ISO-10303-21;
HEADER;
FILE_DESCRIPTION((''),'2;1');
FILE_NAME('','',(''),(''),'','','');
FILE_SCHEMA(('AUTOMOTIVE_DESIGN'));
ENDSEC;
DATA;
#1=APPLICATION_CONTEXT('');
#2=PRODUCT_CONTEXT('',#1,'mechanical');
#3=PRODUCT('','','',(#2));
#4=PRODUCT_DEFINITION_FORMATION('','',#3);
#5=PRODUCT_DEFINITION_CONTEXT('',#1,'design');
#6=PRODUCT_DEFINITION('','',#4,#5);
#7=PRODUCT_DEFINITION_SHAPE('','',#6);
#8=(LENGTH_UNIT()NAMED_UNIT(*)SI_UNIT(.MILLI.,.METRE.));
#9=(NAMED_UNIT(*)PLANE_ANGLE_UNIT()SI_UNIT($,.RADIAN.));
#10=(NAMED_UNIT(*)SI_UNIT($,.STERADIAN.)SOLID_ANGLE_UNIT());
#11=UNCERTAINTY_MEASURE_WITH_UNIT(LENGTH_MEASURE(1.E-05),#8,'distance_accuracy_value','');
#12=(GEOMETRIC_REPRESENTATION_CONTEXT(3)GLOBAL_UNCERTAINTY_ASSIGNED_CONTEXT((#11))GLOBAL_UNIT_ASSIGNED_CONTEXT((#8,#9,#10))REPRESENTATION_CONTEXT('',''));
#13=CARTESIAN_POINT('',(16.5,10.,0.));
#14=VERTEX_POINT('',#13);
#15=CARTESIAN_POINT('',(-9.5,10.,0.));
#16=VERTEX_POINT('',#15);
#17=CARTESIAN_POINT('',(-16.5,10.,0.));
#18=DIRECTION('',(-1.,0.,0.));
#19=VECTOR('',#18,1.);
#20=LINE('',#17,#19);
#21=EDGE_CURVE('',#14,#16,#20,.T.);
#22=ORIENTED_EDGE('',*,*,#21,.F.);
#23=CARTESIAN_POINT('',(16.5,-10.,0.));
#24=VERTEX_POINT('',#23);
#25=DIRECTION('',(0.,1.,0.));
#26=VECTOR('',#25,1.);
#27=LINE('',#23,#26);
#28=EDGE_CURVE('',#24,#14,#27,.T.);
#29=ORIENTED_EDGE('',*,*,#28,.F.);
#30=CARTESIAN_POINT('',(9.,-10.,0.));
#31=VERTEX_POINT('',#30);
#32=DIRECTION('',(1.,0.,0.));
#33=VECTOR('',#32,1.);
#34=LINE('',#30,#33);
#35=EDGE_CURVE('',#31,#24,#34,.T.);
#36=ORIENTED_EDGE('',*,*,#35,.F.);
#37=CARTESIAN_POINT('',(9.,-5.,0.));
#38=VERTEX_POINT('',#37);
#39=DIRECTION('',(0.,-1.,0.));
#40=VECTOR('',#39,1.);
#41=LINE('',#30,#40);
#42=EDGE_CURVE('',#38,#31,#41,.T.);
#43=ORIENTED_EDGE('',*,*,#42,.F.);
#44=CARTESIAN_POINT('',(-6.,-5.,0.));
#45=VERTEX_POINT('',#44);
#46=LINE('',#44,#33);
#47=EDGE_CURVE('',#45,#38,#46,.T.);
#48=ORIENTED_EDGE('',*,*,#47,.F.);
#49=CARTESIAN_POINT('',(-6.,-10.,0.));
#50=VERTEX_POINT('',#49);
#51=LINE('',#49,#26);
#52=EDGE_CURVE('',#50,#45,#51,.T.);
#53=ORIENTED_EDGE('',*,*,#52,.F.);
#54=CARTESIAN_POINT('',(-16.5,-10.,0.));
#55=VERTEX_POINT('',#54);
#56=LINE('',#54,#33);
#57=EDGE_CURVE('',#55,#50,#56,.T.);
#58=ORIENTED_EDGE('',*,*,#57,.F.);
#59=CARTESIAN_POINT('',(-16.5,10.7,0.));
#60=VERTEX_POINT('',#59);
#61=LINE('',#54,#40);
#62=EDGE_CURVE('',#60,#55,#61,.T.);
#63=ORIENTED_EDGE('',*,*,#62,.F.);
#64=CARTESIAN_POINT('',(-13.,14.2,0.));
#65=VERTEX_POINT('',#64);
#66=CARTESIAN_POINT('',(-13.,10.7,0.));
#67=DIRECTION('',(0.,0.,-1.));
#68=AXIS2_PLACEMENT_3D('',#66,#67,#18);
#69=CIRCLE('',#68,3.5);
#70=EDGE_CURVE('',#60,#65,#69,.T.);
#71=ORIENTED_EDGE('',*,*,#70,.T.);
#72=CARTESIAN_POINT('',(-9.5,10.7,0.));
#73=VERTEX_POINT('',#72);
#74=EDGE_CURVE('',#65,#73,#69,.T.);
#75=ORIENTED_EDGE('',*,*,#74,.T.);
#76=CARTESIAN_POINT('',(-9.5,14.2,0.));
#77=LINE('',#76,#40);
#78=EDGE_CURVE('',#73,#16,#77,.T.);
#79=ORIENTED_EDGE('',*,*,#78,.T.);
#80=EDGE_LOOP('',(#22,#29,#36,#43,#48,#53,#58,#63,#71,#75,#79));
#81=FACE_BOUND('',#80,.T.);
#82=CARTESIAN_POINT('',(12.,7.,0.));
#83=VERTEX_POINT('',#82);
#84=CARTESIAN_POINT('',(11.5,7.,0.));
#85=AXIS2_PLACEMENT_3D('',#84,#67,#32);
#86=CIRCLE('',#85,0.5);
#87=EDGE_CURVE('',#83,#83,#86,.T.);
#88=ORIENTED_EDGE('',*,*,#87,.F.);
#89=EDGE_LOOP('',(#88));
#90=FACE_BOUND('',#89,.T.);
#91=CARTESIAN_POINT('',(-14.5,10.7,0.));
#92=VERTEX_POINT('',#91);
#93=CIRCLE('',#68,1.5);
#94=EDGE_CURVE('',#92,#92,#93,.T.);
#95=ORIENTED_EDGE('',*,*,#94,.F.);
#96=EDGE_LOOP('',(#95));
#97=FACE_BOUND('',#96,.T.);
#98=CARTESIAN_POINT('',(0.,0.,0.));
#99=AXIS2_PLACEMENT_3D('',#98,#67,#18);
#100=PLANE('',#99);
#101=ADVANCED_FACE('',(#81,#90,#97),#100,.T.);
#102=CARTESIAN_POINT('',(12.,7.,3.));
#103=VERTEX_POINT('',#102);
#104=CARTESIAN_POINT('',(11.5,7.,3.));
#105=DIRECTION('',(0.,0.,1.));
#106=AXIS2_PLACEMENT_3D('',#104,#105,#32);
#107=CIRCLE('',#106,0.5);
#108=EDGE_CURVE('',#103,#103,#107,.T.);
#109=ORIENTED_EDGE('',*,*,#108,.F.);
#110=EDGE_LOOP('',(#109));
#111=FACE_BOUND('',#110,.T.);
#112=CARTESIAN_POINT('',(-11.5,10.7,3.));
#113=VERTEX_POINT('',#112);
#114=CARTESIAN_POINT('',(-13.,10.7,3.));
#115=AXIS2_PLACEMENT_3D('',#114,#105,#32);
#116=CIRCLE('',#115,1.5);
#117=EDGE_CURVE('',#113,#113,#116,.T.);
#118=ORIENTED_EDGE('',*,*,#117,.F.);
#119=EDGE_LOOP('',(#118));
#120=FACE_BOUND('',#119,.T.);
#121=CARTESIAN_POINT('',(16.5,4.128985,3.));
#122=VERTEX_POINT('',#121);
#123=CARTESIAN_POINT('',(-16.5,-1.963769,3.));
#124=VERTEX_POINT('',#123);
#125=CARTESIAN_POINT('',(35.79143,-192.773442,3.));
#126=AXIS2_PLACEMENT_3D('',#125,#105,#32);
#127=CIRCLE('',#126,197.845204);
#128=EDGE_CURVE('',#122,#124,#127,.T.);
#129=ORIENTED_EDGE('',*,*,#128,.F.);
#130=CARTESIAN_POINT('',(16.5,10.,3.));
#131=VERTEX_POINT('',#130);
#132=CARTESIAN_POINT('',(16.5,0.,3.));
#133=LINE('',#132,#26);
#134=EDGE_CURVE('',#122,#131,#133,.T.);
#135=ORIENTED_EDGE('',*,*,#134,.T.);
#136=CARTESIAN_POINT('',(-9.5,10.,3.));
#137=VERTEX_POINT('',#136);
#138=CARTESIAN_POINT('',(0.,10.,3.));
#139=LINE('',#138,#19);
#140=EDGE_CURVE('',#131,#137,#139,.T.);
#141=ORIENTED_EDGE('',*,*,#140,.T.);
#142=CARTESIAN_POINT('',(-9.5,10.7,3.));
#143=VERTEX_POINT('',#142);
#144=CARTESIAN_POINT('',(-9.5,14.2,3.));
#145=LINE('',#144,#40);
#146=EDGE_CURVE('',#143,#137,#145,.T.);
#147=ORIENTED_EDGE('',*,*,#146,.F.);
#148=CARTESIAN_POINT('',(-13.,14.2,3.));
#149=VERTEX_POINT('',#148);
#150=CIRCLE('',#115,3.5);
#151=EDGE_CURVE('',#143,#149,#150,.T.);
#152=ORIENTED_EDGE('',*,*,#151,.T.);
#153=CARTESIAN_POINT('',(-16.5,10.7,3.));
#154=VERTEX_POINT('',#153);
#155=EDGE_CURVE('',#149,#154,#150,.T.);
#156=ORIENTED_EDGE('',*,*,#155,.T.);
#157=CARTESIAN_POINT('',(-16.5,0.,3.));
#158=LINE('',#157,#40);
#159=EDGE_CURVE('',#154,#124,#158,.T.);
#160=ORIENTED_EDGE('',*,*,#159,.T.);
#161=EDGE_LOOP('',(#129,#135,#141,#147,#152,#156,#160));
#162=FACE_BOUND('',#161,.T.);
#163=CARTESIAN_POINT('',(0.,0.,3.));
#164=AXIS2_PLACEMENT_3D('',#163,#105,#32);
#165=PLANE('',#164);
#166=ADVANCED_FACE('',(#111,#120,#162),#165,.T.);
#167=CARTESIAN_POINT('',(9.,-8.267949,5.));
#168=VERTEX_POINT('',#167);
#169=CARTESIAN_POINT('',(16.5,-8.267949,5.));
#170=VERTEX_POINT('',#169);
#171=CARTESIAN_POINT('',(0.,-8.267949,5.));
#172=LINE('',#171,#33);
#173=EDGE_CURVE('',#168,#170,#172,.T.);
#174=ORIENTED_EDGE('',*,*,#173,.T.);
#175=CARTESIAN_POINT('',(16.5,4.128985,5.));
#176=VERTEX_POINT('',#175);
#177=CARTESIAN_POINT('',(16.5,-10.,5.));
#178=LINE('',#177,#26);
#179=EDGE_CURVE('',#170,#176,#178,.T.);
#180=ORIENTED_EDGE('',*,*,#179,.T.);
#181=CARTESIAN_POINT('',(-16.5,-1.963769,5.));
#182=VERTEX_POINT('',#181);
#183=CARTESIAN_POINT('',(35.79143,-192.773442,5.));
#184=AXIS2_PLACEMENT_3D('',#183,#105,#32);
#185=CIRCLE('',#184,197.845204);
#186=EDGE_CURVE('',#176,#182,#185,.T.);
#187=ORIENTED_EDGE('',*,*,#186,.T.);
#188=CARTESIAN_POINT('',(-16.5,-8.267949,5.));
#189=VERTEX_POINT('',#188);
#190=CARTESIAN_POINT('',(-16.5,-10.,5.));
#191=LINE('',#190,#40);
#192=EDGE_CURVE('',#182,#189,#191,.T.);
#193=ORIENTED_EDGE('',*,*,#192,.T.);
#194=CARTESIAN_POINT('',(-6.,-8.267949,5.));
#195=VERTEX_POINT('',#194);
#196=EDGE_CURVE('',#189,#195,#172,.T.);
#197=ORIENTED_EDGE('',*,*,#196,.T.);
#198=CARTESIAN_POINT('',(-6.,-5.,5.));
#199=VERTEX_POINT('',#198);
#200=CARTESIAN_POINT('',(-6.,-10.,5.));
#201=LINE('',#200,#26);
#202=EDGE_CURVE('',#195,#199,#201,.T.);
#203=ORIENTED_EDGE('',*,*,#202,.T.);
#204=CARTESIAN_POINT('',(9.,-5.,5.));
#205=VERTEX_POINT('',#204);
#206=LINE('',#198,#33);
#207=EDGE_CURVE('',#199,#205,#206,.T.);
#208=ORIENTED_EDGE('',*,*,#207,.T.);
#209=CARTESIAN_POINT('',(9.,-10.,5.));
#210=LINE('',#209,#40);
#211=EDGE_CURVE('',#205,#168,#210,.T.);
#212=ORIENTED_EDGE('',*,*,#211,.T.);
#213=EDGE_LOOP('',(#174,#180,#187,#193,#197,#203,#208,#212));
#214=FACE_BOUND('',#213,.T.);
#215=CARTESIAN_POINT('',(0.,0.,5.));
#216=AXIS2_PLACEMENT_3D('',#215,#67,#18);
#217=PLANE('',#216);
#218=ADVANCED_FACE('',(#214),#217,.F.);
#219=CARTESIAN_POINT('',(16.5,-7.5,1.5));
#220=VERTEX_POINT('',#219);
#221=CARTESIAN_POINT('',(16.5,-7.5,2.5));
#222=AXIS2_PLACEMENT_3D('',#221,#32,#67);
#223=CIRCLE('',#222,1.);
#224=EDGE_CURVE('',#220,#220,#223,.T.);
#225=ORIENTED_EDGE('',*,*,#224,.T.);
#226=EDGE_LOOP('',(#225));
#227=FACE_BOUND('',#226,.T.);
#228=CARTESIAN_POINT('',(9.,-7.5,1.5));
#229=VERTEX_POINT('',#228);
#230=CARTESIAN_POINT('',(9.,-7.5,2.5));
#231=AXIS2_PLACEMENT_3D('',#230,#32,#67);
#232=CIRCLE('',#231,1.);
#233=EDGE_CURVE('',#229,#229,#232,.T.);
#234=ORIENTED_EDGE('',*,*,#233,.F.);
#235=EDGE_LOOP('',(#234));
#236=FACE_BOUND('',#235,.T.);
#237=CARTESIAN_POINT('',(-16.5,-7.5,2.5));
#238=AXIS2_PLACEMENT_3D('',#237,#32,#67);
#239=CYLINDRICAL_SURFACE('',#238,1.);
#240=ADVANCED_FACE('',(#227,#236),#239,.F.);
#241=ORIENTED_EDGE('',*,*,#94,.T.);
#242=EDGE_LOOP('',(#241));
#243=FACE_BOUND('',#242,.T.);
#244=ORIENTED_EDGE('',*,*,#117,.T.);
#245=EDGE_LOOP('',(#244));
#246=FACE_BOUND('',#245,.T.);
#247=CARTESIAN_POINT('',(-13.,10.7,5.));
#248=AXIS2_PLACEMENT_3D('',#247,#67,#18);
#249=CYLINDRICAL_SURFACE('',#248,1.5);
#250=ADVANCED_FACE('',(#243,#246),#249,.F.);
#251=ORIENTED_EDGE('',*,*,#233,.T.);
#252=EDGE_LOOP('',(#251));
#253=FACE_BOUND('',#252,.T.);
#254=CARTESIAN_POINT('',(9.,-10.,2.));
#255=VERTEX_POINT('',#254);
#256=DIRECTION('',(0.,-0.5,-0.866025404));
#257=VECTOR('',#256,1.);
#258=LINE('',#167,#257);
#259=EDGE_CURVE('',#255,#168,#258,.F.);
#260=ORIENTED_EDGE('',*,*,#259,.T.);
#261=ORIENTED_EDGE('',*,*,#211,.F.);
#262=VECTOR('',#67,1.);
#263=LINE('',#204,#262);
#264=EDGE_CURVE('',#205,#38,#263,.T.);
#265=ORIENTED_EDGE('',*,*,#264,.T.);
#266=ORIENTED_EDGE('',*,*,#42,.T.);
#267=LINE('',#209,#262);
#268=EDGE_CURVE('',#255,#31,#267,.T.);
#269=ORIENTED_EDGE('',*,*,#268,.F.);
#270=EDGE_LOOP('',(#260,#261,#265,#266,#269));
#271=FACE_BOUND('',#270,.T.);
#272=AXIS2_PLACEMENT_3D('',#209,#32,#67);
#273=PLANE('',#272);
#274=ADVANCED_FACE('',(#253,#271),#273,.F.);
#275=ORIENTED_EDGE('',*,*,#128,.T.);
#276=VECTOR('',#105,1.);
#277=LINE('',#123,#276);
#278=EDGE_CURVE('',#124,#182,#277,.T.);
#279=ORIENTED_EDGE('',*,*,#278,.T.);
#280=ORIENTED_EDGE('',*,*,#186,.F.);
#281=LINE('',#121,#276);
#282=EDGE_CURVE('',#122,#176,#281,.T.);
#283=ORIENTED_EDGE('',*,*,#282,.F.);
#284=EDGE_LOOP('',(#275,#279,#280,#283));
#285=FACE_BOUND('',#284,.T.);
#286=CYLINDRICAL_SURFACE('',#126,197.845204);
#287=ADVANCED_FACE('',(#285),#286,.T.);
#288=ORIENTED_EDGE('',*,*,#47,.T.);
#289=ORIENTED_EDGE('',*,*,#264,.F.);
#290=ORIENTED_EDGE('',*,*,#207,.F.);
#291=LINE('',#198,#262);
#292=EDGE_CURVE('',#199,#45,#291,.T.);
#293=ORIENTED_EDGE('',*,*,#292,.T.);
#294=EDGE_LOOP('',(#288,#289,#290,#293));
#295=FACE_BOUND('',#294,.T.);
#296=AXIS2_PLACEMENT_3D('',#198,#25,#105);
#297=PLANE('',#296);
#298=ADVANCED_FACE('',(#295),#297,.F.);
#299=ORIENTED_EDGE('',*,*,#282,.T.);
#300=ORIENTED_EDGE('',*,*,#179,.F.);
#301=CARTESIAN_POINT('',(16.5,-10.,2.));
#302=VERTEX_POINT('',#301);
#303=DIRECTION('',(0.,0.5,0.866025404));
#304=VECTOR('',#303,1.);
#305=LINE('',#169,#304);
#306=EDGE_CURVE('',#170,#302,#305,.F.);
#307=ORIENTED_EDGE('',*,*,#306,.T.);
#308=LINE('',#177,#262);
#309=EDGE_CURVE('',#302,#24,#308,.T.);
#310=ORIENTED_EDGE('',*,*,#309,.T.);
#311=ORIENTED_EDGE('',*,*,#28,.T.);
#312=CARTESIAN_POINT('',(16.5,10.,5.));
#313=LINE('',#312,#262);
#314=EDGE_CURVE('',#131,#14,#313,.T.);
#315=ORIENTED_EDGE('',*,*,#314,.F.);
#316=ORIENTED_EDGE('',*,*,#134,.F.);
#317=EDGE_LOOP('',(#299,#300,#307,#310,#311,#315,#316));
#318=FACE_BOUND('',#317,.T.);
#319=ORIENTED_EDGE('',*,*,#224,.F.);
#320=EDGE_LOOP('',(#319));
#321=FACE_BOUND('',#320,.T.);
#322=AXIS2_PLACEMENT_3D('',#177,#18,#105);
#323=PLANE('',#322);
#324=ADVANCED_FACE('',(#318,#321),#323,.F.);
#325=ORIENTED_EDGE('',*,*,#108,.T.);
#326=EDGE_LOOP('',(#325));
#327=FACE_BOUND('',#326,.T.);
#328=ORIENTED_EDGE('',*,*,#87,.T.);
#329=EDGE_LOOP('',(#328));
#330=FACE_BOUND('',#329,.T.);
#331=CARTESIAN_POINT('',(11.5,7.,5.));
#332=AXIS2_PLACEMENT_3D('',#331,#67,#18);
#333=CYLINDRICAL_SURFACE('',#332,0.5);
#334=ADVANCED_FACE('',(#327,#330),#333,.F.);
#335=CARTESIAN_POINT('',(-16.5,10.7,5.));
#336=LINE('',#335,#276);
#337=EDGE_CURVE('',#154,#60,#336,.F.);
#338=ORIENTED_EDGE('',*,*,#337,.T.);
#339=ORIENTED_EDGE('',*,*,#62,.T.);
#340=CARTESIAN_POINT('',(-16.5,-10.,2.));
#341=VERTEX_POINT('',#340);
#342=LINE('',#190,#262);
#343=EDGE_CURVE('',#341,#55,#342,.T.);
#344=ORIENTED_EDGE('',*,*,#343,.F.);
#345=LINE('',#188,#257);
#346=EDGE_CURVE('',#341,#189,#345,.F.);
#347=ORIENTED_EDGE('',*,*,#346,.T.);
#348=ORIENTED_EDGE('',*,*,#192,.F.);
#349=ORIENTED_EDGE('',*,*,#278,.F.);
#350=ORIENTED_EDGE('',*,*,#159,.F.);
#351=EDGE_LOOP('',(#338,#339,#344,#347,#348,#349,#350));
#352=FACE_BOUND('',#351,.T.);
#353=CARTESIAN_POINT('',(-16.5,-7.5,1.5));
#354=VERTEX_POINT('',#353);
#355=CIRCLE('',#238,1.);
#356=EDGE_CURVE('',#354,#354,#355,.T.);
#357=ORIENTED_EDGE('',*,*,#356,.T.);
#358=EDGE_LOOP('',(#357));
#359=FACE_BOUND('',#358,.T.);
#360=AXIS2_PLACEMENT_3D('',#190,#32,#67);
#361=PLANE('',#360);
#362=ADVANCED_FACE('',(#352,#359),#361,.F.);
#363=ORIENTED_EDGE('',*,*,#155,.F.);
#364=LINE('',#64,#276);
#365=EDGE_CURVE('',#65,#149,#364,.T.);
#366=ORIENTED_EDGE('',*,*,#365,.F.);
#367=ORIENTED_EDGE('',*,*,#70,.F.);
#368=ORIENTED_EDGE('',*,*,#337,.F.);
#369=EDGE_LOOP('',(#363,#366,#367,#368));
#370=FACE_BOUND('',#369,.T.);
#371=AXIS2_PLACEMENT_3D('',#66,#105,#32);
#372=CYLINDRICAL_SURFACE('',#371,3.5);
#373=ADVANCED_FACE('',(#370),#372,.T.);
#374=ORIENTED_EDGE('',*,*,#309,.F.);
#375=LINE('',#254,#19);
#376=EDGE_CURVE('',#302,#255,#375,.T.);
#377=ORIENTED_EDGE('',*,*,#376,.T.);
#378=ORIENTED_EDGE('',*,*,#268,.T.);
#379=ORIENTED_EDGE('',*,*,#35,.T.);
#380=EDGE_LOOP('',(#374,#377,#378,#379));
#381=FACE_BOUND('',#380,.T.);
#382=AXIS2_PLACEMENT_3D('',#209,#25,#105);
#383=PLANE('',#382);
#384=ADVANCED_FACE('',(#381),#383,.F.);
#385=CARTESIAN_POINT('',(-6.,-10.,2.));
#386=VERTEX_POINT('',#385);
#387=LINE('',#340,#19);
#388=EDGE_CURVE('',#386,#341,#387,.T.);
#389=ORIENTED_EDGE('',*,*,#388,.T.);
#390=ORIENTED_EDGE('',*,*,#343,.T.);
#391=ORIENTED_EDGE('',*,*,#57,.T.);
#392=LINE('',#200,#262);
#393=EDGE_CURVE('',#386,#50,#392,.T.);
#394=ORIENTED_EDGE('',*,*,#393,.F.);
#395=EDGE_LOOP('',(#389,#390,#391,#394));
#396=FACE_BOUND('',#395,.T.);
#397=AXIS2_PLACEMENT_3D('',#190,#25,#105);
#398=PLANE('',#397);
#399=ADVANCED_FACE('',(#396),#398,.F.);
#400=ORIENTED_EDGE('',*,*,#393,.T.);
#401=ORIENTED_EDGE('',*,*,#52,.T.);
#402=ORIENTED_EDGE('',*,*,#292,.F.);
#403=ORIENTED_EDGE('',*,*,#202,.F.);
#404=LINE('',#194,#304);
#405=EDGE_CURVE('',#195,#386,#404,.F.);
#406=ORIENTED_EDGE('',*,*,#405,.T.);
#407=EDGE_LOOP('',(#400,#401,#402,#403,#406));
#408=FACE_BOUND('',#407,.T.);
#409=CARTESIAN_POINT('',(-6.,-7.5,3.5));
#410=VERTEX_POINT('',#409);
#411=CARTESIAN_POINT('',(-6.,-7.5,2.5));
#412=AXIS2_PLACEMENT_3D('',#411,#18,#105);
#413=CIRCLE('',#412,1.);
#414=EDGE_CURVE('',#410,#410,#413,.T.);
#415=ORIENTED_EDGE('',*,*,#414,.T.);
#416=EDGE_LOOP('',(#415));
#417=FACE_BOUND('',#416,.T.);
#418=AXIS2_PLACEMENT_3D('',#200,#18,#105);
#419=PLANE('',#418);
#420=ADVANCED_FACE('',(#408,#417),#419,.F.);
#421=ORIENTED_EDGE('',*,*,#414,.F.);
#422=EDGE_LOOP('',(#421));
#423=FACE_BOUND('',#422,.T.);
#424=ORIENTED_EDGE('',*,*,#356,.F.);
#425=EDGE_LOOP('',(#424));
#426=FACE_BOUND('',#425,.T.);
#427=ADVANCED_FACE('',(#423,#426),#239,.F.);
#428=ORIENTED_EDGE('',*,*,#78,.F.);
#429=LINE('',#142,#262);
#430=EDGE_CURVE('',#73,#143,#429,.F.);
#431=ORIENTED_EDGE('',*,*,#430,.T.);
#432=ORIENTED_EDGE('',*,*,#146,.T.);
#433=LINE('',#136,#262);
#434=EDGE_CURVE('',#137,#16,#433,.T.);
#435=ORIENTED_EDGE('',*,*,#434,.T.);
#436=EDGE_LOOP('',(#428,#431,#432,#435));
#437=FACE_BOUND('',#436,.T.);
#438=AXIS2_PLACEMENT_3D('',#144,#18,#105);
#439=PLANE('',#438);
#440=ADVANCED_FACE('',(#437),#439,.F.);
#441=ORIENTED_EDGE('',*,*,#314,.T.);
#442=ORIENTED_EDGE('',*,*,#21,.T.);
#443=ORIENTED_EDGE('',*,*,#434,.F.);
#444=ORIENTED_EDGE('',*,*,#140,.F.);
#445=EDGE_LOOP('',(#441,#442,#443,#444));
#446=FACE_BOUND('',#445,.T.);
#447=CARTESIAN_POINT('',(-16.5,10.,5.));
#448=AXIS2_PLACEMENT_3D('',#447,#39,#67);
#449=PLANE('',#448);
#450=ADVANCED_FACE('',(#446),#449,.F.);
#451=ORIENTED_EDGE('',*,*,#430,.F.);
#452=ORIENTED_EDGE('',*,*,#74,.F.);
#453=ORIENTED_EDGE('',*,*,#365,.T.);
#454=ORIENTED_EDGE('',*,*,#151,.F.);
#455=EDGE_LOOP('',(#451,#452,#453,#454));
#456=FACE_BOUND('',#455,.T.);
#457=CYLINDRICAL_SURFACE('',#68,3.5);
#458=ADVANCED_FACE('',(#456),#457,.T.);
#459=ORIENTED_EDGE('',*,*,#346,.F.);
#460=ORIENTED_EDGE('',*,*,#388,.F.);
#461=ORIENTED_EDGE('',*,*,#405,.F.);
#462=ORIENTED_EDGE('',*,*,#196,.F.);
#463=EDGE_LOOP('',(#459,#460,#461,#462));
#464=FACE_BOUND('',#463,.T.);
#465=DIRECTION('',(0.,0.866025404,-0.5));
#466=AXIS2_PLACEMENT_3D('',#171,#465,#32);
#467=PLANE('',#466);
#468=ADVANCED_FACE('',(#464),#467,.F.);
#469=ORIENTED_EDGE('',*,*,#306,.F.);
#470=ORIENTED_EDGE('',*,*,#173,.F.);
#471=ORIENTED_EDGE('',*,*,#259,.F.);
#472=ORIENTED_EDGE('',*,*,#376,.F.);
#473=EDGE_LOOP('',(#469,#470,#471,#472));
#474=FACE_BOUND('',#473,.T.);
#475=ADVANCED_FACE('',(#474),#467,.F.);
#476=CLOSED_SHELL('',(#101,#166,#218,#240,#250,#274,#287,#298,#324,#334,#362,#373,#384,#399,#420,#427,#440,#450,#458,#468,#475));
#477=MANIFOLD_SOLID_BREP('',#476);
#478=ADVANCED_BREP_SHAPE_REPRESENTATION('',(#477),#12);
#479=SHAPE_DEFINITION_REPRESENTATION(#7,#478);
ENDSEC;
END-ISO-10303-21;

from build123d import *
from OCP.BRepFilletAPI import BRepFilletAPI_MakeChamfer

# Parameters (mm, degrees)
RESSALTO_EXTRUS_O1_DEPTH = 5
ESBO_O2_R                = 1
CORTE_EXTRUS_O1_DEPTH    = 35.84250278
CORTE_EXTRUS_O2_DEPTH    = 2
SKETCH1_R                = 0.5
CUT_EXTRUDE1_DEPTH       = 20.931131428
SKETCH2_W                = 7
SKETCH2_H                = 3
BOSS_EXTRUDE1_DEPTH      = 4.2
SKETCH3_R                = 1.5
CUT_EXTRUDE2_DEPTH       = 23.33584563
FILLET2_R                = 3.5
CHAMFER1_SIZE            = 3
CHAMFER1_SIZE2           = 1.732050808


with BuildPart() as part:
    # Esboço1 → Ressalto-extrusão1 (new body)
    with BuildSketch(Plane.XY):
        Polygon((9, -10), (16.5, -10), (16.5, 10), (-16.5, 10), (-16.5, -10), (-6, -10), (-6, -5), (9, -5), align=None)
    extrude(amount=RESSALTO_EXTRUS_O1_DEPTH)

    # Esboço2 → Corte-extrusão1 (cut, through all)
    with BuildSketch(Plane(origin=(16.5, 0, 0), x_dir=(0, 0, -1), z_dir=(1, 0, 0))):
        with Locations((-2.5, -7.5)):
            Circle(ESBO_O2_R)
    extrude(amount=-CORTE_EXTRUS_O1_DEPTH, mode=Mode.SUBTRACT)

    # Esboço3 → Corte-extrusão2 (cut)
    with BuildSketch(Plane.XY.offset(5)):
        with BuildLine():
            Line((-16.5, 10), (-16.5, -1.963769034))
            ThreePointArc((-16.5, -1.963769034), (-0.129411774, 1.783536996), (16.5, 4.128984796))
            Line((16.5, 4.128984796), (16.5, 5.523404181))
            Line((16.5, 5.523404181), (16.5, 10))
            Line((16.5, 10), (-16.5, 10))
        make_face()
    extrude(amount=-CORTE_EXTRUS_O2_DEPTH, mode=Mode.SUBTRACT)

    # Sketch1 → Cut-Extrude1 (cut, through all)
    with BuildSketch(Plane(origin=(0, 0, 0), x_dir=(-1, 0, 0), z_dir=(0, 0, -1))):
        with Locations(Location((-11.5, 7, 0), (0, 0, 180))):
            Circle(SKETCH1_R)
    extrude(amount=-CUT_EXTRUDE1_DEPTH, mode=Mode.SUBTRACT)

    # Sketch2 → Boss-Extrude1 (add)
    with BuildSketch(Plane(origin=(0, 10, 0), x_dir=(1, 0, 0), z_dir=(0, 1, 0))):
        with Locations((-13, -1.5)):
            Rectangle(SKETCH2_W, SKETCH2_H)
    extrude(amount=BOSS_EXTRUDE1_DEPTH)

    # Sketch3 → Cut-Extrude2 (cut, through all)
    with BuildSketch(Plane(origin=(0, 0, 0), x_dir=(-1, 0, 0), z_dir=(0, 0, -1))):
        with Locations((13, 10.7)):
            Circle(SKETCH3_R)
    extrude(amount=-CUT_EXTRUDE2_DEPTH, mode=Mode.SUBTRACT)

    # Fillet2
    fillet2_edges = [part.edges().sort_by_distance(p)[0] for p in [
        (-9.5, 14.2, 1.5),
        (-16.5, 14.2, 1.5),
    ]]
    fillet(fillet2_edges, radius=FILLET2_R - 0.0001)  # a hair under: the kernel refuses the full size

    # Chamfer1: one chamfer whose edges measure the first distance from different faces: ONE call of the kernel's chamfer builder (chamfer() names one face for all edges)
    chamfer1_edges_1 = [part.edges().sort_by_distance(p)[0] for p in [
        (-11.25, -10, 5),
    ]]
    chamfer1_side_1 = [part.faces().sort_by_distance(p)[0] for p in [
        (-11.25, -10, 2.5),
    ]]
    chamfer1_edges_2 = [part.edges().sort_by_distance(p)[0] for p in [
        (12.75, -10, 5),
    ]]
    chamfer1_side_2 = [part.faces().sort_by_distance(p)[0] for p in [
        (12.75, -10, 2.5),
    ]]
    chamfer1 = BRepFilletAPI_MakeChamfer(part.part.solid().wrapped)
    for e in chamfer1_edges_1:
        chamfer1.Add(CHAMFER1_SIZE, CHAMFER1_SIZE2, e.wrapped, chamfer1_side_1[0].wrapped)  # the first distance lies on this face
    for e in chamfer1_edges_2:
        chamfer1.Add(CHAMFER1_SIZE, CHAMFER1_SIZE2, e.wrapped, chamfer1_side_2[0].wrapped)  # the first distance lies on this face
    add(Compound.cast(chamfer1.Shape()), mode=Mode.REPLACE)


solid = part.part
